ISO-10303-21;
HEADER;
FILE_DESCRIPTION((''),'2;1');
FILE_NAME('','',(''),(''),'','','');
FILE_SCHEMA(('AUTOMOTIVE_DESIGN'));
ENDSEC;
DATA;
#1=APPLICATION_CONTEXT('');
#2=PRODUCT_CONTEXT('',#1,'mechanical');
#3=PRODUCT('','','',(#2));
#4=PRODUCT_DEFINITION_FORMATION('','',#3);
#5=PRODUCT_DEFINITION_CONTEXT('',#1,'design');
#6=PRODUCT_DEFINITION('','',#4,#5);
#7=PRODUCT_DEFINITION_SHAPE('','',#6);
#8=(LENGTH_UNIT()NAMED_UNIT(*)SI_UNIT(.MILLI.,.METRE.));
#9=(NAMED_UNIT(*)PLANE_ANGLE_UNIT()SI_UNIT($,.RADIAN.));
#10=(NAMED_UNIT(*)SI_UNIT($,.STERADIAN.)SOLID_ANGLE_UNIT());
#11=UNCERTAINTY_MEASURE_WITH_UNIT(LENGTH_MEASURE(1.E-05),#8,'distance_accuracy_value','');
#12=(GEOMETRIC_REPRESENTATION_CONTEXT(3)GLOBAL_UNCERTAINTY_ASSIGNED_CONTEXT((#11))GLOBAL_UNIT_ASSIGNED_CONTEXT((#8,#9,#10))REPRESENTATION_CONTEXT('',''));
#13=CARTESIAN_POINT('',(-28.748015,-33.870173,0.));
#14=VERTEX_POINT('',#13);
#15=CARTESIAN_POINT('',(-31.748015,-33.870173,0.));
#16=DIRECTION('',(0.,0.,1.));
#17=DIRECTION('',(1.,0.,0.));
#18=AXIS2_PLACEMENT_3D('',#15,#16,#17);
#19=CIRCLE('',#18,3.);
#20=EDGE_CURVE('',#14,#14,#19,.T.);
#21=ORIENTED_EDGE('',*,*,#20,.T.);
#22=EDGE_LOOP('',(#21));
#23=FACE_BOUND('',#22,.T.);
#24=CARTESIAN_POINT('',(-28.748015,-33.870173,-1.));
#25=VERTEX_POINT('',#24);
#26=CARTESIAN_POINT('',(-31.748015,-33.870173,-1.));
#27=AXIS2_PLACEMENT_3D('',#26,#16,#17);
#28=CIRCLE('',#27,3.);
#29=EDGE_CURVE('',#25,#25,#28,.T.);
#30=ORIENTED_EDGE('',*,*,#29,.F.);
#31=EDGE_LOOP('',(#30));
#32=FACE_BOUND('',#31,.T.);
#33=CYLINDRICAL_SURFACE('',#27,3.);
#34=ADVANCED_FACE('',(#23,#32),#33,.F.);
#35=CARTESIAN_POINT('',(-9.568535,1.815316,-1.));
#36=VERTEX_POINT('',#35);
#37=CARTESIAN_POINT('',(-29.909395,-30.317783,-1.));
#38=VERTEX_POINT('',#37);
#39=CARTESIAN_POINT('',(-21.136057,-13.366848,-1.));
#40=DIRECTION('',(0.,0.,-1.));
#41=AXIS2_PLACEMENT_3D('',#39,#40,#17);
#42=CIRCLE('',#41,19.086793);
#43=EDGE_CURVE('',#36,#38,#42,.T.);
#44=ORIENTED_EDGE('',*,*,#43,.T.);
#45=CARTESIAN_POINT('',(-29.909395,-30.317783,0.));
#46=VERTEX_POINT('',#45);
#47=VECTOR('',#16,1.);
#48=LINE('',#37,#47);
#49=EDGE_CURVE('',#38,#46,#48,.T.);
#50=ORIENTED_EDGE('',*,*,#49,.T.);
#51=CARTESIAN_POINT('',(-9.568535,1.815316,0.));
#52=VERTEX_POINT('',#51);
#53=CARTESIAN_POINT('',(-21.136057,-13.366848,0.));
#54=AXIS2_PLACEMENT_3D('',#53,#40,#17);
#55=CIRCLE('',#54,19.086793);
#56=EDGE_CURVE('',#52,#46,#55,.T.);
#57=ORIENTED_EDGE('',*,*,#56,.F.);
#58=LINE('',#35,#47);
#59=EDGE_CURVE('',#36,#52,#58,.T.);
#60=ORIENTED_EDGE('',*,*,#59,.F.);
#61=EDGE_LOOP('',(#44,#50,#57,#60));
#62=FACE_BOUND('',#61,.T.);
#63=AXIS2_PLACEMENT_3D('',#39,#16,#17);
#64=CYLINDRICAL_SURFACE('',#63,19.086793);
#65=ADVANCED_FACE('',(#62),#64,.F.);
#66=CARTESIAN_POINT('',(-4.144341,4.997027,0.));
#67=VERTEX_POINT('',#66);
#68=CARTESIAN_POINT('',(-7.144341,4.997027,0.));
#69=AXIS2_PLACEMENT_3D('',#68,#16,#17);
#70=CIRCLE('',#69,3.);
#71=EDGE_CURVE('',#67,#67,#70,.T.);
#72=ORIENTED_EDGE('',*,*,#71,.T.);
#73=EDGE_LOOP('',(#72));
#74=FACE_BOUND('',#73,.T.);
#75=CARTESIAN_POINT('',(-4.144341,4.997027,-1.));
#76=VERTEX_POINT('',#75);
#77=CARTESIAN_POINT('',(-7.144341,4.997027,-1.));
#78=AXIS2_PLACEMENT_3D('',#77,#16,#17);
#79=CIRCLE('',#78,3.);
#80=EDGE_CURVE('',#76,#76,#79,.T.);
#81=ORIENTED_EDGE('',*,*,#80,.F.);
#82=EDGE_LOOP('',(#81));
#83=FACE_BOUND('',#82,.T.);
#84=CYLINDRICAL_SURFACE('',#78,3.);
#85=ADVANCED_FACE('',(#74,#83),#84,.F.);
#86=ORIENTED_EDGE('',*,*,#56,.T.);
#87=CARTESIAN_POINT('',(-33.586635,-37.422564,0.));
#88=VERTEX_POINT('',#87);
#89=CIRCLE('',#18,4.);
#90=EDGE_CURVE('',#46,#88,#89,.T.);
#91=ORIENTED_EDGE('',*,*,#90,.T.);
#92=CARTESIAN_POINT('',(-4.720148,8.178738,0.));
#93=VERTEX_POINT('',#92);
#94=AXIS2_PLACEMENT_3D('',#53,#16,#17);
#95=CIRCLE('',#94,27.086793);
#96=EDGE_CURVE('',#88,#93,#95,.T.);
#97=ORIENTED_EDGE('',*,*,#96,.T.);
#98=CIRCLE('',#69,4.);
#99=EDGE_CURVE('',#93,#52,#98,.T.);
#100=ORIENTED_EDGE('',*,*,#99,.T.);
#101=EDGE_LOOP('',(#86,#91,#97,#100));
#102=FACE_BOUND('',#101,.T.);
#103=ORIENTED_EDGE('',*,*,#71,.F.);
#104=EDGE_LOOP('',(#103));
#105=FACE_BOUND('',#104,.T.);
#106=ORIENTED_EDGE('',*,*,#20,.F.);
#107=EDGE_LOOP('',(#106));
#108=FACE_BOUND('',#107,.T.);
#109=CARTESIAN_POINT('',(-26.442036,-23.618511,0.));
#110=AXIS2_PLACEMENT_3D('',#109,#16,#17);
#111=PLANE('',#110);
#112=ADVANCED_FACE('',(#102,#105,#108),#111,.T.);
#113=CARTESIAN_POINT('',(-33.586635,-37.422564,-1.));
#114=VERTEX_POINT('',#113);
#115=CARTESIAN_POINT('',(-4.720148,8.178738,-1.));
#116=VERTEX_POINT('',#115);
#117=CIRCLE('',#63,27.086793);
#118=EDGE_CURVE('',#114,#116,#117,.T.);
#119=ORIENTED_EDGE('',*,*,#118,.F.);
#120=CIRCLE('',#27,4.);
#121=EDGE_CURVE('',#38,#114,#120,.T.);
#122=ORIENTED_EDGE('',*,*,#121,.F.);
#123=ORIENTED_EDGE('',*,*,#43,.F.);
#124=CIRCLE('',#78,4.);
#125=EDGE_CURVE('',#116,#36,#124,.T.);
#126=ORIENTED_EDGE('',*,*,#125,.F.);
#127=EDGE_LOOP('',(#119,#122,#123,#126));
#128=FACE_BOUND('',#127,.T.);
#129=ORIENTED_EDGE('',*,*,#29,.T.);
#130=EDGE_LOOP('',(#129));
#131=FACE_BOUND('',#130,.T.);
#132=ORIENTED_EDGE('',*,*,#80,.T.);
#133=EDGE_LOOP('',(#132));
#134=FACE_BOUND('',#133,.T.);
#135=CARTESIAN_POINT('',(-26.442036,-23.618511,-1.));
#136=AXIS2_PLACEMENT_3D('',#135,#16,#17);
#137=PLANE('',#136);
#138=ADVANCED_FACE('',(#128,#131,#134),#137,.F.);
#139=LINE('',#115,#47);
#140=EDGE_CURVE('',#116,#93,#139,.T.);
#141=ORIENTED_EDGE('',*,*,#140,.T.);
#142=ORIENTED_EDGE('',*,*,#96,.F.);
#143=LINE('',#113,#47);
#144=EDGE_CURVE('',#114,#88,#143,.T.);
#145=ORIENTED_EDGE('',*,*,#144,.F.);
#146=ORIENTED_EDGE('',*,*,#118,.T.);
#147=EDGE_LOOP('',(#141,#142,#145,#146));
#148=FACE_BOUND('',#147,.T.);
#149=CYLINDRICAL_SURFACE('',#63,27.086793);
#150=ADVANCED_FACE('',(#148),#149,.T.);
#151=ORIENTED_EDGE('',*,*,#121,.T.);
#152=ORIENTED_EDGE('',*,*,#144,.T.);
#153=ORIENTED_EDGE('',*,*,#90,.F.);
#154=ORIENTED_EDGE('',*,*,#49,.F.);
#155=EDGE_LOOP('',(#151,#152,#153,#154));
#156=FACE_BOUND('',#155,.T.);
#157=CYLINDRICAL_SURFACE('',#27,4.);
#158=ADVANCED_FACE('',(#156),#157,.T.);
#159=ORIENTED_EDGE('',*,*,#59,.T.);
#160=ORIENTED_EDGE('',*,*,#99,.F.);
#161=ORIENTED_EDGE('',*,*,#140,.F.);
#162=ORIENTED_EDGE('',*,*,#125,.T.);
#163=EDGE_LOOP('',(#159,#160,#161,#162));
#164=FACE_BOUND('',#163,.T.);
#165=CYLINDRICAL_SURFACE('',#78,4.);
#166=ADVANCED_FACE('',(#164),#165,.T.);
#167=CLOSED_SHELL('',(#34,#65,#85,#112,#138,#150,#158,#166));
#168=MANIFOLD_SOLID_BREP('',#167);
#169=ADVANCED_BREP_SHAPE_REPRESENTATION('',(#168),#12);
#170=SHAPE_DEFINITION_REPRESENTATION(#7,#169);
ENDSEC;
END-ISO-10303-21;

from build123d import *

# Parameters (mm, degrees)
ESQUISSE1_R               = 3
T_LE_DE_BASE_PLI_E1_DEPTH = 1


# Sheet-metal steps are written as plain solids
with BuildPart() as part:
    # Esquisse1 → Tôle de base pliée1 (new body)
    with BuildSketch(Plane.XY):
        with BuildLine():
            ThreePointArc((-33.586634848, -37.422563624), (1.75063467, -27.854557121), (-4.720147653, 8.178737781))
            ThreePointArc((-4.720147653, 8.178737781), (-10.326052384, 7.421220682), (-9.568535285, 1.815315952))
            ThreePointArc((-9.568535285, 1.815315952), (-5.008878396, -23.575657367), (-29.909395263, -30.317782906))
            ThreePointArc((-29.909395263, -30.317782906), (-35.300405414, -32.031553473), (-33.586634848, -37.422563624))
        make_face()
        with Locations((-31.748015055, -33.870173265)):
            Circle(ESQUISSE1_R, mode=Mode.SUBTRACT)
        with Locations((-7.144341469, 4.997026867)):
            Circle(ESQUISSE1_R, mode=Mode.SUBTRACT)
    extrude(amount=-T_LE_DE_BASE_PLI_E1_DEPTH)


solid = part.part
